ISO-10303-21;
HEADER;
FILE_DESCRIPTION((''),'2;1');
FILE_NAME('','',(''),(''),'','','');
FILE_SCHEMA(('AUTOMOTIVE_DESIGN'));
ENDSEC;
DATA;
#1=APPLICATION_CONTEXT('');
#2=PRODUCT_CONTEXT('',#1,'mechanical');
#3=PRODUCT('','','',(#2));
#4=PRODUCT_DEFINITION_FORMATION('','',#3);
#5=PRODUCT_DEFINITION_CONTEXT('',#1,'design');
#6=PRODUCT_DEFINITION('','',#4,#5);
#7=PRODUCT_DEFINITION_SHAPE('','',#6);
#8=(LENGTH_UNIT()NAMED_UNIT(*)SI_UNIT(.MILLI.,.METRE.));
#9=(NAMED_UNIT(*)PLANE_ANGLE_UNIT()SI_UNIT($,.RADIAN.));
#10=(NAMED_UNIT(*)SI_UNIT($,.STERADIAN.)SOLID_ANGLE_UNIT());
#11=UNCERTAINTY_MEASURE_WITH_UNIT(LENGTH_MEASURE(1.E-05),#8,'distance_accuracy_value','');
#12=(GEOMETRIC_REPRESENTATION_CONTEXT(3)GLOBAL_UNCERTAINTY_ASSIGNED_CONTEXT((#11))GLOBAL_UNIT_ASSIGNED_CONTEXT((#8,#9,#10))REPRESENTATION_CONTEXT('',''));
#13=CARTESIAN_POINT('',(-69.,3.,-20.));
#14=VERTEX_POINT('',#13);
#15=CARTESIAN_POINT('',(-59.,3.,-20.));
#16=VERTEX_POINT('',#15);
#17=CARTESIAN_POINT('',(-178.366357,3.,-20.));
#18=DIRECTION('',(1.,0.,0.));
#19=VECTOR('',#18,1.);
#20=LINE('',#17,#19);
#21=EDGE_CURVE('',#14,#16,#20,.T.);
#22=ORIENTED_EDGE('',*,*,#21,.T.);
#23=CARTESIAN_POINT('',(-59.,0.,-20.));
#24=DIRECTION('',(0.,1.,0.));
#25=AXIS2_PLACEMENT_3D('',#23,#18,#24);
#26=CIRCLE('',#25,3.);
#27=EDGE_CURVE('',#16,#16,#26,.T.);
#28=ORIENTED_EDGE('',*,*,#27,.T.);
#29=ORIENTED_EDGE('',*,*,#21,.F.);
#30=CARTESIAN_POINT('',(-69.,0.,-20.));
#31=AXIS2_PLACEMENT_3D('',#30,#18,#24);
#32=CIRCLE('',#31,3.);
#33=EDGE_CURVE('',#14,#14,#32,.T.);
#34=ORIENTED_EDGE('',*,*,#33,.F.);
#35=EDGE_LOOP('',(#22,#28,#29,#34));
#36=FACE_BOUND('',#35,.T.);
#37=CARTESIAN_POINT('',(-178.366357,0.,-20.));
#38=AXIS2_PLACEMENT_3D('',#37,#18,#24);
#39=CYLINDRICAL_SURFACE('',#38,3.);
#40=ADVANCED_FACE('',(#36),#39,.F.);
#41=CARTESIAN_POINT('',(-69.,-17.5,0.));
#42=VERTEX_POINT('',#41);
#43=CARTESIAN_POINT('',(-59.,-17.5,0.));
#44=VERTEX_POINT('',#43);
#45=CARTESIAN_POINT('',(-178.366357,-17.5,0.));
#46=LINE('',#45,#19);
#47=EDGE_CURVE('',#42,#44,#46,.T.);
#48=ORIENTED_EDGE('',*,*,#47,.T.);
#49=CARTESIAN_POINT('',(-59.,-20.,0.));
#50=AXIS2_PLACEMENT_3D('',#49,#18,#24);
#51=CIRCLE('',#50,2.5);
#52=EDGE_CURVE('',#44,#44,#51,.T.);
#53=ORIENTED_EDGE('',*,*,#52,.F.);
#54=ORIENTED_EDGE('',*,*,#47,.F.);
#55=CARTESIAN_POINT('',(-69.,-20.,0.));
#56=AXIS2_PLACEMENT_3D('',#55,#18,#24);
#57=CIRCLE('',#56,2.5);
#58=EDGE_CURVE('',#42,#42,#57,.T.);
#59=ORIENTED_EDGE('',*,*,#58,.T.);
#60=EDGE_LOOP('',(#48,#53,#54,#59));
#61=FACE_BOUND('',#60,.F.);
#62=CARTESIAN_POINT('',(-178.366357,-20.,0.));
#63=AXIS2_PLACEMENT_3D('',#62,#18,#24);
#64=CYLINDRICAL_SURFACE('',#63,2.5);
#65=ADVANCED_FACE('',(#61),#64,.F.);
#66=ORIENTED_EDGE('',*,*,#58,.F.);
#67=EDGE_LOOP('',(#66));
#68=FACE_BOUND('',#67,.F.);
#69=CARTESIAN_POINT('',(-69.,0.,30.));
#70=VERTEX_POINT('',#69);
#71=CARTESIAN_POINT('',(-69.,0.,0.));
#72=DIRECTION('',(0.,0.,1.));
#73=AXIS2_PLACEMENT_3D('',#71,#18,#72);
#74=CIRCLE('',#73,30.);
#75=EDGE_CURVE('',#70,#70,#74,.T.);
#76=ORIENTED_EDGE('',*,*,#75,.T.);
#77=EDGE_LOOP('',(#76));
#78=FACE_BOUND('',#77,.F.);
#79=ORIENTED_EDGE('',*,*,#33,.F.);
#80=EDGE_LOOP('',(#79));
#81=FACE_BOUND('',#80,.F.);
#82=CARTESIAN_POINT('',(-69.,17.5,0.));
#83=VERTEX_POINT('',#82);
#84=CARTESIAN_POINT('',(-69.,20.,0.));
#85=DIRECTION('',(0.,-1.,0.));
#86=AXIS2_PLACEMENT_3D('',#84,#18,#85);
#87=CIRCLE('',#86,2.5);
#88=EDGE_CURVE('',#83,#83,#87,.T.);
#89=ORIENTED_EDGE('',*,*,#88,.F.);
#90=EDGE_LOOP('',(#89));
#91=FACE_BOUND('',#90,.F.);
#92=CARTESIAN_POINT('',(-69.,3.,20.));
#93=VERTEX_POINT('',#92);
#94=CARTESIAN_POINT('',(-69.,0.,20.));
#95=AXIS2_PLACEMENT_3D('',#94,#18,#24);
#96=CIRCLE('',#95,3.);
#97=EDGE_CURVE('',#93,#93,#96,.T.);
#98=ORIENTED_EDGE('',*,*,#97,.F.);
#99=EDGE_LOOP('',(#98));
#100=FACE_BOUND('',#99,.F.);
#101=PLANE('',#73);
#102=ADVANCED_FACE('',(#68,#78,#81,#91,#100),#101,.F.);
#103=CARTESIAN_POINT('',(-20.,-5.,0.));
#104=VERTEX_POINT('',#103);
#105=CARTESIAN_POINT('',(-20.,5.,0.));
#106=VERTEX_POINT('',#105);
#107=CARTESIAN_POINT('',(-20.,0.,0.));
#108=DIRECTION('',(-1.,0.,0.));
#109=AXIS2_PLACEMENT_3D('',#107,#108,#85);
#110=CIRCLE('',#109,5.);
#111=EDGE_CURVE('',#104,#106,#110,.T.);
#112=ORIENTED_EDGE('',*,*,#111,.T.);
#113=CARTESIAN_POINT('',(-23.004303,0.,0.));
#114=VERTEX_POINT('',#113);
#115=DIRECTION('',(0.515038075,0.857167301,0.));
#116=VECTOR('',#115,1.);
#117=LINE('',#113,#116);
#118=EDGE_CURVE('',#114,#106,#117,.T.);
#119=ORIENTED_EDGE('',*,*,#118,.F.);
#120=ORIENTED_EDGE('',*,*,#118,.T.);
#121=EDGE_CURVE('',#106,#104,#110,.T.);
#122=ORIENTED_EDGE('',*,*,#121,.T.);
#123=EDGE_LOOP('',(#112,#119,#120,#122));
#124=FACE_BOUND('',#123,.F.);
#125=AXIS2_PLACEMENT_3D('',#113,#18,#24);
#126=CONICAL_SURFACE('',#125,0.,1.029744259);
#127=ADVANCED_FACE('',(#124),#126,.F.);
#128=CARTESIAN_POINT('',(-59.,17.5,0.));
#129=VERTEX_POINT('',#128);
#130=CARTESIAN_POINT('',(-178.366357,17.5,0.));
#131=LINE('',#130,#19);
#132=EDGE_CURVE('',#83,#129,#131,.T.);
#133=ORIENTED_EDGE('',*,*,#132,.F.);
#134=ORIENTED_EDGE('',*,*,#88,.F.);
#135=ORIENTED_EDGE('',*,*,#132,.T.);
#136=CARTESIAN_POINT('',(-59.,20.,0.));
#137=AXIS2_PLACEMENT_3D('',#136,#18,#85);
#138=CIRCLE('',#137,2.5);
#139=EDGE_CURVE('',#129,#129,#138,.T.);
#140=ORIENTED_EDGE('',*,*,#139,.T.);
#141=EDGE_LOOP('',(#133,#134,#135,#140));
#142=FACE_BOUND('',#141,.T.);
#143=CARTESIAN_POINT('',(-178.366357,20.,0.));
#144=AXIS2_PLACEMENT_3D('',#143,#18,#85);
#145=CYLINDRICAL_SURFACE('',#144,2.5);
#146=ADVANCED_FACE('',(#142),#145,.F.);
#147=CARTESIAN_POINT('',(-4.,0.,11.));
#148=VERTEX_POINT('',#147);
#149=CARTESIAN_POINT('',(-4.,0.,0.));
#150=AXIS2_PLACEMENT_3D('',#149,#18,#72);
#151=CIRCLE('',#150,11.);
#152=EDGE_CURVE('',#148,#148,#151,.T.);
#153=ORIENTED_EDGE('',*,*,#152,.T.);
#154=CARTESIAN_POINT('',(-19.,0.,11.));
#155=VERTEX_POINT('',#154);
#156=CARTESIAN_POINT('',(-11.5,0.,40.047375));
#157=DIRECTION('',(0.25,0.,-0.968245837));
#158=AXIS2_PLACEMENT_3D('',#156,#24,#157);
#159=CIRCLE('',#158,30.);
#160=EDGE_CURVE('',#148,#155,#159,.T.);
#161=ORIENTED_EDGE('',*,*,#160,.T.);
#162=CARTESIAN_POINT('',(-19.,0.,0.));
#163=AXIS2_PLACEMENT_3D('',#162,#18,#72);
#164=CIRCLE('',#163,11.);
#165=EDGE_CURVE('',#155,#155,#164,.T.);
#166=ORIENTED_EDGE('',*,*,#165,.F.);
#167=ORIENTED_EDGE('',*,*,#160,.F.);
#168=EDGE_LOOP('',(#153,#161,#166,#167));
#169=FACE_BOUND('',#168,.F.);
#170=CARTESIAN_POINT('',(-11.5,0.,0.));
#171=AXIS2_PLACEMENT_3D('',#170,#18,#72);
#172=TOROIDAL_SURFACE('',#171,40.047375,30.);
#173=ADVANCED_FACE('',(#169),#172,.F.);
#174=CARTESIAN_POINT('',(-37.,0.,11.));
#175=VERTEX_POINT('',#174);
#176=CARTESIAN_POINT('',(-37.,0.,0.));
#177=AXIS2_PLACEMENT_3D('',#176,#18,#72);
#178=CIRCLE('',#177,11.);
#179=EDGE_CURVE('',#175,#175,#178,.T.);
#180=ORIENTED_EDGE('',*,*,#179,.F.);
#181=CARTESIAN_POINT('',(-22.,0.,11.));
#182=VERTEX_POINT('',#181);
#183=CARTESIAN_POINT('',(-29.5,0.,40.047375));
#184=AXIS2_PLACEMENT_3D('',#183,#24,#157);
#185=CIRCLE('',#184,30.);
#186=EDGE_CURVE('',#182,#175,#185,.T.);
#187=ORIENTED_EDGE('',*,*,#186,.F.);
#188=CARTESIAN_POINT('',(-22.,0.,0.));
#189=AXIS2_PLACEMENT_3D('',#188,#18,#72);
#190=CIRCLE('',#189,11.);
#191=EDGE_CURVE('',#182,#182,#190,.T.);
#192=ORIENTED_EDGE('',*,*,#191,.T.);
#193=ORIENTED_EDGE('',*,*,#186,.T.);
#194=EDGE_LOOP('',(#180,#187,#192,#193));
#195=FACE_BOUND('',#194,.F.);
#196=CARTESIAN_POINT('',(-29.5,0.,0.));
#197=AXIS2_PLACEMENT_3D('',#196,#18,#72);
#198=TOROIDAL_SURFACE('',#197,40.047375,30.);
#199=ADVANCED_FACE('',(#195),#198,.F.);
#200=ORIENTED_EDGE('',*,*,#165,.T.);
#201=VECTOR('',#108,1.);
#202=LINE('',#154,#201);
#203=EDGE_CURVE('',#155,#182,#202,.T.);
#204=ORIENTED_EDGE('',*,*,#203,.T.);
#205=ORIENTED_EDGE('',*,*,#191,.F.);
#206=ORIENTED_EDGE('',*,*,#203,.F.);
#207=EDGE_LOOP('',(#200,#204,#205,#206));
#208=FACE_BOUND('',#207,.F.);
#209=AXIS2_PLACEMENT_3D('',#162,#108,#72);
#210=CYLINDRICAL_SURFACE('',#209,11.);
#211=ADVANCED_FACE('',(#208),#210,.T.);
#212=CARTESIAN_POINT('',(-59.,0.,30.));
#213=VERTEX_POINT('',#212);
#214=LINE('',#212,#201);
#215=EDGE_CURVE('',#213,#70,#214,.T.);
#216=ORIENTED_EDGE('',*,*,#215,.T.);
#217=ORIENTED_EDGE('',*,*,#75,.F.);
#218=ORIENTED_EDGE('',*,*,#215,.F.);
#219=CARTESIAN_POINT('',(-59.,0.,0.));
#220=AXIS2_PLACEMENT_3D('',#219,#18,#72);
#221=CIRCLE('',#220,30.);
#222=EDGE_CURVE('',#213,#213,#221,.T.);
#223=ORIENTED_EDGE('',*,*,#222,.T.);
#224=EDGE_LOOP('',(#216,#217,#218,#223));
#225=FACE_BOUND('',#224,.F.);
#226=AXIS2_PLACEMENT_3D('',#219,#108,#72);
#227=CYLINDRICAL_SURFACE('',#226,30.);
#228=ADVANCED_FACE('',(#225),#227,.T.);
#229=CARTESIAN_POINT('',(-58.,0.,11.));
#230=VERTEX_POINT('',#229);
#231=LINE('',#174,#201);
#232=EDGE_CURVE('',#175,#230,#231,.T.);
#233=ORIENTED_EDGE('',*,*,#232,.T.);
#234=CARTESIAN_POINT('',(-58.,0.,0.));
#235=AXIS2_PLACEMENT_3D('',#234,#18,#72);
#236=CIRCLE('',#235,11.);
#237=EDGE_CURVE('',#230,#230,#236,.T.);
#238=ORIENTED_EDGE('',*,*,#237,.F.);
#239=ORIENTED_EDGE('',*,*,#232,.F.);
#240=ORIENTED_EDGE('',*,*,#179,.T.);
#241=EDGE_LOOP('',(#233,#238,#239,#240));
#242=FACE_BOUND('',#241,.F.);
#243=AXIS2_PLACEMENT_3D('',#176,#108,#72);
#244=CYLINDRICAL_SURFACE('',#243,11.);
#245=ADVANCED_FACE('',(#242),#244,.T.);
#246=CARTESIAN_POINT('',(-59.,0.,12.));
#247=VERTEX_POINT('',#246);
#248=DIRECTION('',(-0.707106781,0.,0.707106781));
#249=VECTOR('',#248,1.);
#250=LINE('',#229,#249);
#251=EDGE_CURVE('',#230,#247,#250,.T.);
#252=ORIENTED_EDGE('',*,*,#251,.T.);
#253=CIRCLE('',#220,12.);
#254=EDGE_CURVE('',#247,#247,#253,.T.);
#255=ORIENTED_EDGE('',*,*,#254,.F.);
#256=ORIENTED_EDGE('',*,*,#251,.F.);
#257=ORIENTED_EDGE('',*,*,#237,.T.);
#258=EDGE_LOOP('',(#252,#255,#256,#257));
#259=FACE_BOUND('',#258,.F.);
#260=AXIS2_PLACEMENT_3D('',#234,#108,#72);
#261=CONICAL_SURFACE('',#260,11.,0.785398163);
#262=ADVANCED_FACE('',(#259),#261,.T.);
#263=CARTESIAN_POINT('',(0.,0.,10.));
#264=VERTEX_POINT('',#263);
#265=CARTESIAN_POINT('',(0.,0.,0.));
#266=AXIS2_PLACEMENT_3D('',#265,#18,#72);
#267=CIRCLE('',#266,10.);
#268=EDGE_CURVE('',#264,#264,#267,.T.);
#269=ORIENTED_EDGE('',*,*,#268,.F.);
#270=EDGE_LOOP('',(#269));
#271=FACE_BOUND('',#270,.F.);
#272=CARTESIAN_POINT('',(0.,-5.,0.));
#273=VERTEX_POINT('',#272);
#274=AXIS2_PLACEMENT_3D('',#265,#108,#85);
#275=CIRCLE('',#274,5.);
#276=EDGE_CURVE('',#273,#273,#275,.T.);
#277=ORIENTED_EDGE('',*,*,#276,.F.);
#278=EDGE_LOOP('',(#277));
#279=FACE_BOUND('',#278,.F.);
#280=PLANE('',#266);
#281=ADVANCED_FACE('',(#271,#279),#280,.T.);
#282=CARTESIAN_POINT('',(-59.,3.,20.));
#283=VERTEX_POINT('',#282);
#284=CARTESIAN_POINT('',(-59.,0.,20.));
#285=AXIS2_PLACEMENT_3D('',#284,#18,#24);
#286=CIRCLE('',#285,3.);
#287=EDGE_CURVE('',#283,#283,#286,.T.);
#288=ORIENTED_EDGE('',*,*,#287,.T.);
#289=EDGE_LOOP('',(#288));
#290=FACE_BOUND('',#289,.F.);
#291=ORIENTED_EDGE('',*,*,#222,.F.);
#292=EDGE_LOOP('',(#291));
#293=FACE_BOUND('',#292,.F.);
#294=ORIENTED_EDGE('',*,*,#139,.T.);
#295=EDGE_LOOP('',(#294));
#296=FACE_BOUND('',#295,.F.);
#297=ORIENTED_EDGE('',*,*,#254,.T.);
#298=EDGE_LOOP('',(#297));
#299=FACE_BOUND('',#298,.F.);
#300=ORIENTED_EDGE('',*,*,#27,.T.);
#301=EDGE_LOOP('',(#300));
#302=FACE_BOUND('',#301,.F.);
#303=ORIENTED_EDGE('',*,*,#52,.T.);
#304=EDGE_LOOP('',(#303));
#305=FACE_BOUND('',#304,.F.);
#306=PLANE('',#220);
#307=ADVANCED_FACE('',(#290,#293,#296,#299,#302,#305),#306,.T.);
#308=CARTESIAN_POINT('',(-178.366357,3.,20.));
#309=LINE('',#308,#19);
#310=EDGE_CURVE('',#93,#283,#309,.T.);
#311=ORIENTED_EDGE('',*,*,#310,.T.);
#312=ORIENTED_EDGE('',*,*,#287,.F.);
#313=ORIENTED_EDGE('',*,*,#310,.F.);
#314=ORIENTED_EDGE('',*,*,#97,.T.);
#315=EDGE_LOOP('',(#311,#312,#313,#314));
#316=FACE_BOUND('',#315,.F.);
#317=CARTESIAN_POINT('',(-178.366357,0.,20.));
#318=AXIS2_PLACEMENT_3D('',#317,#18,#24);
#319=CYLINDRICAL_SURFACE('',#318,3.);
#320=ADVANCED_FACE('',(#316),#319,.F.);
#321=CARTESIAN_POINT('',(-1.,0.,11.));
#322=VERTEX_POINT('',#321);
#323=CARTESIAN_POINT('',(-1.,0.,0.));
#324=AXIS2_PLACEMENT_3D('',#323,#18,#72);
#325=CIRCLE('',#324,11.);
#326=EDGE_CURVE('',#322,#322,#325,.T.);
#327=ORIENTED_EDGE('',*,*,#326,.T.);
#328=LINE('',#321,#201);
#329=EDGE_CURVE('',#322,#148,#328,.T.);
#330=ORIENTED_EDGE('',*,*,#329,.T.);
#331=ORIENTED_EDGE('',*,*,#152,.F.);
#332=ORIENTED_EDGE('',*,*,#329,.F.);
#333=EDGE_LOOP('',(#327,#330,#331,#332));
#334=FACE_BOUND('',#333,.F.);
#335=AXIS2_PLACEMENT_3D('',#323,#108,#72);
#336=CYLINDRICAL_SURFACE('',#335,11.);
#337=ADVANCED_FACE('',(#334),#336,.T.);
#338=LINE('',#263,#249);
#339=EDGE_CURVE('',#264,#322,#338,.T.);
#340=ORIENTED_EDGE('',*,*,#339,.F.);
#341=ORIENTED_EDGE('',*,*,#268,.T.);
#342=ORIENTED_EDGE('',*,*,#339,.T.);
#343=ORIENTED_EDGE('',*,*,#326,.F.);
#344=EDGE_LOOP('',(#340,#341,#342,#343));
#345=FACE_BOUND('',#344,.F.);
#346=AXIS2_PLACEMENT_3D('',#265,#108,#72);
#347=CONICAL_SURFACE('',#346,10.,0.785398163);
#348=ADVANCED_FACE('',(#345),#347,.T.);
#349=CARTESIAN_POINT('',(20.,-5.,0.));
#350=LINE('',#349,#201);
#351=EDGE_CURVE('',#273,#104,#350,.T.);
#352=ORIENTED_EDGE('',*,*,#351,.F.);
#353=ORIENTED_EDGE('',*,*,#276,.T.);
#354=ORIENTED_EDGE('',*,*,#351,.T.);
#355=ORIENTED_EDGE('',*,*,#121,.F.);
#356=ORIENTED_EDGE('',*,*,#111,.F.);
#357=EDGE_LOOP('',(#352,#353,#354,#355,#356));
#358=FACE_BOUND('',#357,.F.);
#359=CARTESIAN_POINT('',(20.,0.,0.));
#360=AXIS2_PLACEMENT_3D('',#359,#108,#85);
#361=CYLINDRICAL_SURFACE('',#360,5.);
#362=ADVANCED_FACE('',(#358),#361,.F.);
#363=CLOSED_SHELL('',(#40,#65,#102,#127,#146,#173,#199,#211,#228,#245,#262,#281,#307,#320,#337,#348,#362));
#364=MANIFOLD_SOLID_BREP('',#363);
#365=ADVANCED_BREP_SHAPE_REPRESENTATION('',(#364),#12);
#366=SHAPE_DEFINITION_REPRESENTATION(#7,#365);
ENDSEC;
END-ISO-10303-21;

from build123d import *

# Parameters (mm, degrees)
F3_D     = 6
F5_D     = 5
F7_D     = 10
F7_DEPTH = 20
F7_TIP   = 3.0043030951


# Not quite as in the source:
# - a pattern or mirror of a feature is missing from the dataset's text; its kind, count and spacing are read off the source's solid


with BuildPart() as f1:
    # F0 (on Front) → F1 (revolve)
    with BuildSketch(Plane.XZ):
        with BuildLine():
            Line((-58, 11), (-59, 12))
            Line((-59, 12), (-59, 30))
            Line((-59, 30), (-69, 30))
            Line((-69, 30), (-69, 0))
            Line((-69, 0), (0, 0))
            Line((0, 0), (0, 10))
            Line((0, 10), (-1, 11))
            Line((-1, 11), (-4, 11))
            ThreePointArc((-4, 11), (-11.5, 10.0473750966), (-19, 11))
            Line((-19, 11), (-22, 11))
            ThreePointArc((-22, 11), (-29.5, 10.0473750966), (-37, 11))
            Line((-37, 11), (-58, 11))
        make_face()
    revolve(axis=Axis((-18.6788269784, 0, 0), (1, 0, 0)))

    # F3 (through all)
    with Locations(Plane(origin=(-69, 0, 0), x_dir=(0, -1, 0), z_dir=(-1, 0, 0))):
        with Locations((0, 20)):
            f3 = Hole(F3_D / 2)

    # F3_copies: F3 across plane
    add(f3.mirror(Plane(origin=(0, 0, 0), x_dir=(-1, 0, 0), z_dir=(0, 0, -1))), mode=Mode.SUBTRACT)

    # F5 (through all)
    with Locations(Plane(origin=(-69, 0, 0), x_dir=(0, -1, 0), z_dir=(-1, 0, 0))):
        with Locations((20, 0)):
            f5 = Hole(F5_D / 2)

    # F5_copies: F5 across plane
    add(f5.mirror(Plane.ZX), mode=Mode.SUBTRACT)

    # F7
    with Locations(Plane.YZ):
        with Locations((0, 0)):
            Hole(F7_D / 2, depth=F7_DEPTH)
            with Locations((0, 0, -(F7_DEPTH + F7_TIP / 2))):  # 118° drill point
                Cone(0, F7_D / 2, F7_TIP, mode=Mode.SUBTRACT)


solid = f1.part
